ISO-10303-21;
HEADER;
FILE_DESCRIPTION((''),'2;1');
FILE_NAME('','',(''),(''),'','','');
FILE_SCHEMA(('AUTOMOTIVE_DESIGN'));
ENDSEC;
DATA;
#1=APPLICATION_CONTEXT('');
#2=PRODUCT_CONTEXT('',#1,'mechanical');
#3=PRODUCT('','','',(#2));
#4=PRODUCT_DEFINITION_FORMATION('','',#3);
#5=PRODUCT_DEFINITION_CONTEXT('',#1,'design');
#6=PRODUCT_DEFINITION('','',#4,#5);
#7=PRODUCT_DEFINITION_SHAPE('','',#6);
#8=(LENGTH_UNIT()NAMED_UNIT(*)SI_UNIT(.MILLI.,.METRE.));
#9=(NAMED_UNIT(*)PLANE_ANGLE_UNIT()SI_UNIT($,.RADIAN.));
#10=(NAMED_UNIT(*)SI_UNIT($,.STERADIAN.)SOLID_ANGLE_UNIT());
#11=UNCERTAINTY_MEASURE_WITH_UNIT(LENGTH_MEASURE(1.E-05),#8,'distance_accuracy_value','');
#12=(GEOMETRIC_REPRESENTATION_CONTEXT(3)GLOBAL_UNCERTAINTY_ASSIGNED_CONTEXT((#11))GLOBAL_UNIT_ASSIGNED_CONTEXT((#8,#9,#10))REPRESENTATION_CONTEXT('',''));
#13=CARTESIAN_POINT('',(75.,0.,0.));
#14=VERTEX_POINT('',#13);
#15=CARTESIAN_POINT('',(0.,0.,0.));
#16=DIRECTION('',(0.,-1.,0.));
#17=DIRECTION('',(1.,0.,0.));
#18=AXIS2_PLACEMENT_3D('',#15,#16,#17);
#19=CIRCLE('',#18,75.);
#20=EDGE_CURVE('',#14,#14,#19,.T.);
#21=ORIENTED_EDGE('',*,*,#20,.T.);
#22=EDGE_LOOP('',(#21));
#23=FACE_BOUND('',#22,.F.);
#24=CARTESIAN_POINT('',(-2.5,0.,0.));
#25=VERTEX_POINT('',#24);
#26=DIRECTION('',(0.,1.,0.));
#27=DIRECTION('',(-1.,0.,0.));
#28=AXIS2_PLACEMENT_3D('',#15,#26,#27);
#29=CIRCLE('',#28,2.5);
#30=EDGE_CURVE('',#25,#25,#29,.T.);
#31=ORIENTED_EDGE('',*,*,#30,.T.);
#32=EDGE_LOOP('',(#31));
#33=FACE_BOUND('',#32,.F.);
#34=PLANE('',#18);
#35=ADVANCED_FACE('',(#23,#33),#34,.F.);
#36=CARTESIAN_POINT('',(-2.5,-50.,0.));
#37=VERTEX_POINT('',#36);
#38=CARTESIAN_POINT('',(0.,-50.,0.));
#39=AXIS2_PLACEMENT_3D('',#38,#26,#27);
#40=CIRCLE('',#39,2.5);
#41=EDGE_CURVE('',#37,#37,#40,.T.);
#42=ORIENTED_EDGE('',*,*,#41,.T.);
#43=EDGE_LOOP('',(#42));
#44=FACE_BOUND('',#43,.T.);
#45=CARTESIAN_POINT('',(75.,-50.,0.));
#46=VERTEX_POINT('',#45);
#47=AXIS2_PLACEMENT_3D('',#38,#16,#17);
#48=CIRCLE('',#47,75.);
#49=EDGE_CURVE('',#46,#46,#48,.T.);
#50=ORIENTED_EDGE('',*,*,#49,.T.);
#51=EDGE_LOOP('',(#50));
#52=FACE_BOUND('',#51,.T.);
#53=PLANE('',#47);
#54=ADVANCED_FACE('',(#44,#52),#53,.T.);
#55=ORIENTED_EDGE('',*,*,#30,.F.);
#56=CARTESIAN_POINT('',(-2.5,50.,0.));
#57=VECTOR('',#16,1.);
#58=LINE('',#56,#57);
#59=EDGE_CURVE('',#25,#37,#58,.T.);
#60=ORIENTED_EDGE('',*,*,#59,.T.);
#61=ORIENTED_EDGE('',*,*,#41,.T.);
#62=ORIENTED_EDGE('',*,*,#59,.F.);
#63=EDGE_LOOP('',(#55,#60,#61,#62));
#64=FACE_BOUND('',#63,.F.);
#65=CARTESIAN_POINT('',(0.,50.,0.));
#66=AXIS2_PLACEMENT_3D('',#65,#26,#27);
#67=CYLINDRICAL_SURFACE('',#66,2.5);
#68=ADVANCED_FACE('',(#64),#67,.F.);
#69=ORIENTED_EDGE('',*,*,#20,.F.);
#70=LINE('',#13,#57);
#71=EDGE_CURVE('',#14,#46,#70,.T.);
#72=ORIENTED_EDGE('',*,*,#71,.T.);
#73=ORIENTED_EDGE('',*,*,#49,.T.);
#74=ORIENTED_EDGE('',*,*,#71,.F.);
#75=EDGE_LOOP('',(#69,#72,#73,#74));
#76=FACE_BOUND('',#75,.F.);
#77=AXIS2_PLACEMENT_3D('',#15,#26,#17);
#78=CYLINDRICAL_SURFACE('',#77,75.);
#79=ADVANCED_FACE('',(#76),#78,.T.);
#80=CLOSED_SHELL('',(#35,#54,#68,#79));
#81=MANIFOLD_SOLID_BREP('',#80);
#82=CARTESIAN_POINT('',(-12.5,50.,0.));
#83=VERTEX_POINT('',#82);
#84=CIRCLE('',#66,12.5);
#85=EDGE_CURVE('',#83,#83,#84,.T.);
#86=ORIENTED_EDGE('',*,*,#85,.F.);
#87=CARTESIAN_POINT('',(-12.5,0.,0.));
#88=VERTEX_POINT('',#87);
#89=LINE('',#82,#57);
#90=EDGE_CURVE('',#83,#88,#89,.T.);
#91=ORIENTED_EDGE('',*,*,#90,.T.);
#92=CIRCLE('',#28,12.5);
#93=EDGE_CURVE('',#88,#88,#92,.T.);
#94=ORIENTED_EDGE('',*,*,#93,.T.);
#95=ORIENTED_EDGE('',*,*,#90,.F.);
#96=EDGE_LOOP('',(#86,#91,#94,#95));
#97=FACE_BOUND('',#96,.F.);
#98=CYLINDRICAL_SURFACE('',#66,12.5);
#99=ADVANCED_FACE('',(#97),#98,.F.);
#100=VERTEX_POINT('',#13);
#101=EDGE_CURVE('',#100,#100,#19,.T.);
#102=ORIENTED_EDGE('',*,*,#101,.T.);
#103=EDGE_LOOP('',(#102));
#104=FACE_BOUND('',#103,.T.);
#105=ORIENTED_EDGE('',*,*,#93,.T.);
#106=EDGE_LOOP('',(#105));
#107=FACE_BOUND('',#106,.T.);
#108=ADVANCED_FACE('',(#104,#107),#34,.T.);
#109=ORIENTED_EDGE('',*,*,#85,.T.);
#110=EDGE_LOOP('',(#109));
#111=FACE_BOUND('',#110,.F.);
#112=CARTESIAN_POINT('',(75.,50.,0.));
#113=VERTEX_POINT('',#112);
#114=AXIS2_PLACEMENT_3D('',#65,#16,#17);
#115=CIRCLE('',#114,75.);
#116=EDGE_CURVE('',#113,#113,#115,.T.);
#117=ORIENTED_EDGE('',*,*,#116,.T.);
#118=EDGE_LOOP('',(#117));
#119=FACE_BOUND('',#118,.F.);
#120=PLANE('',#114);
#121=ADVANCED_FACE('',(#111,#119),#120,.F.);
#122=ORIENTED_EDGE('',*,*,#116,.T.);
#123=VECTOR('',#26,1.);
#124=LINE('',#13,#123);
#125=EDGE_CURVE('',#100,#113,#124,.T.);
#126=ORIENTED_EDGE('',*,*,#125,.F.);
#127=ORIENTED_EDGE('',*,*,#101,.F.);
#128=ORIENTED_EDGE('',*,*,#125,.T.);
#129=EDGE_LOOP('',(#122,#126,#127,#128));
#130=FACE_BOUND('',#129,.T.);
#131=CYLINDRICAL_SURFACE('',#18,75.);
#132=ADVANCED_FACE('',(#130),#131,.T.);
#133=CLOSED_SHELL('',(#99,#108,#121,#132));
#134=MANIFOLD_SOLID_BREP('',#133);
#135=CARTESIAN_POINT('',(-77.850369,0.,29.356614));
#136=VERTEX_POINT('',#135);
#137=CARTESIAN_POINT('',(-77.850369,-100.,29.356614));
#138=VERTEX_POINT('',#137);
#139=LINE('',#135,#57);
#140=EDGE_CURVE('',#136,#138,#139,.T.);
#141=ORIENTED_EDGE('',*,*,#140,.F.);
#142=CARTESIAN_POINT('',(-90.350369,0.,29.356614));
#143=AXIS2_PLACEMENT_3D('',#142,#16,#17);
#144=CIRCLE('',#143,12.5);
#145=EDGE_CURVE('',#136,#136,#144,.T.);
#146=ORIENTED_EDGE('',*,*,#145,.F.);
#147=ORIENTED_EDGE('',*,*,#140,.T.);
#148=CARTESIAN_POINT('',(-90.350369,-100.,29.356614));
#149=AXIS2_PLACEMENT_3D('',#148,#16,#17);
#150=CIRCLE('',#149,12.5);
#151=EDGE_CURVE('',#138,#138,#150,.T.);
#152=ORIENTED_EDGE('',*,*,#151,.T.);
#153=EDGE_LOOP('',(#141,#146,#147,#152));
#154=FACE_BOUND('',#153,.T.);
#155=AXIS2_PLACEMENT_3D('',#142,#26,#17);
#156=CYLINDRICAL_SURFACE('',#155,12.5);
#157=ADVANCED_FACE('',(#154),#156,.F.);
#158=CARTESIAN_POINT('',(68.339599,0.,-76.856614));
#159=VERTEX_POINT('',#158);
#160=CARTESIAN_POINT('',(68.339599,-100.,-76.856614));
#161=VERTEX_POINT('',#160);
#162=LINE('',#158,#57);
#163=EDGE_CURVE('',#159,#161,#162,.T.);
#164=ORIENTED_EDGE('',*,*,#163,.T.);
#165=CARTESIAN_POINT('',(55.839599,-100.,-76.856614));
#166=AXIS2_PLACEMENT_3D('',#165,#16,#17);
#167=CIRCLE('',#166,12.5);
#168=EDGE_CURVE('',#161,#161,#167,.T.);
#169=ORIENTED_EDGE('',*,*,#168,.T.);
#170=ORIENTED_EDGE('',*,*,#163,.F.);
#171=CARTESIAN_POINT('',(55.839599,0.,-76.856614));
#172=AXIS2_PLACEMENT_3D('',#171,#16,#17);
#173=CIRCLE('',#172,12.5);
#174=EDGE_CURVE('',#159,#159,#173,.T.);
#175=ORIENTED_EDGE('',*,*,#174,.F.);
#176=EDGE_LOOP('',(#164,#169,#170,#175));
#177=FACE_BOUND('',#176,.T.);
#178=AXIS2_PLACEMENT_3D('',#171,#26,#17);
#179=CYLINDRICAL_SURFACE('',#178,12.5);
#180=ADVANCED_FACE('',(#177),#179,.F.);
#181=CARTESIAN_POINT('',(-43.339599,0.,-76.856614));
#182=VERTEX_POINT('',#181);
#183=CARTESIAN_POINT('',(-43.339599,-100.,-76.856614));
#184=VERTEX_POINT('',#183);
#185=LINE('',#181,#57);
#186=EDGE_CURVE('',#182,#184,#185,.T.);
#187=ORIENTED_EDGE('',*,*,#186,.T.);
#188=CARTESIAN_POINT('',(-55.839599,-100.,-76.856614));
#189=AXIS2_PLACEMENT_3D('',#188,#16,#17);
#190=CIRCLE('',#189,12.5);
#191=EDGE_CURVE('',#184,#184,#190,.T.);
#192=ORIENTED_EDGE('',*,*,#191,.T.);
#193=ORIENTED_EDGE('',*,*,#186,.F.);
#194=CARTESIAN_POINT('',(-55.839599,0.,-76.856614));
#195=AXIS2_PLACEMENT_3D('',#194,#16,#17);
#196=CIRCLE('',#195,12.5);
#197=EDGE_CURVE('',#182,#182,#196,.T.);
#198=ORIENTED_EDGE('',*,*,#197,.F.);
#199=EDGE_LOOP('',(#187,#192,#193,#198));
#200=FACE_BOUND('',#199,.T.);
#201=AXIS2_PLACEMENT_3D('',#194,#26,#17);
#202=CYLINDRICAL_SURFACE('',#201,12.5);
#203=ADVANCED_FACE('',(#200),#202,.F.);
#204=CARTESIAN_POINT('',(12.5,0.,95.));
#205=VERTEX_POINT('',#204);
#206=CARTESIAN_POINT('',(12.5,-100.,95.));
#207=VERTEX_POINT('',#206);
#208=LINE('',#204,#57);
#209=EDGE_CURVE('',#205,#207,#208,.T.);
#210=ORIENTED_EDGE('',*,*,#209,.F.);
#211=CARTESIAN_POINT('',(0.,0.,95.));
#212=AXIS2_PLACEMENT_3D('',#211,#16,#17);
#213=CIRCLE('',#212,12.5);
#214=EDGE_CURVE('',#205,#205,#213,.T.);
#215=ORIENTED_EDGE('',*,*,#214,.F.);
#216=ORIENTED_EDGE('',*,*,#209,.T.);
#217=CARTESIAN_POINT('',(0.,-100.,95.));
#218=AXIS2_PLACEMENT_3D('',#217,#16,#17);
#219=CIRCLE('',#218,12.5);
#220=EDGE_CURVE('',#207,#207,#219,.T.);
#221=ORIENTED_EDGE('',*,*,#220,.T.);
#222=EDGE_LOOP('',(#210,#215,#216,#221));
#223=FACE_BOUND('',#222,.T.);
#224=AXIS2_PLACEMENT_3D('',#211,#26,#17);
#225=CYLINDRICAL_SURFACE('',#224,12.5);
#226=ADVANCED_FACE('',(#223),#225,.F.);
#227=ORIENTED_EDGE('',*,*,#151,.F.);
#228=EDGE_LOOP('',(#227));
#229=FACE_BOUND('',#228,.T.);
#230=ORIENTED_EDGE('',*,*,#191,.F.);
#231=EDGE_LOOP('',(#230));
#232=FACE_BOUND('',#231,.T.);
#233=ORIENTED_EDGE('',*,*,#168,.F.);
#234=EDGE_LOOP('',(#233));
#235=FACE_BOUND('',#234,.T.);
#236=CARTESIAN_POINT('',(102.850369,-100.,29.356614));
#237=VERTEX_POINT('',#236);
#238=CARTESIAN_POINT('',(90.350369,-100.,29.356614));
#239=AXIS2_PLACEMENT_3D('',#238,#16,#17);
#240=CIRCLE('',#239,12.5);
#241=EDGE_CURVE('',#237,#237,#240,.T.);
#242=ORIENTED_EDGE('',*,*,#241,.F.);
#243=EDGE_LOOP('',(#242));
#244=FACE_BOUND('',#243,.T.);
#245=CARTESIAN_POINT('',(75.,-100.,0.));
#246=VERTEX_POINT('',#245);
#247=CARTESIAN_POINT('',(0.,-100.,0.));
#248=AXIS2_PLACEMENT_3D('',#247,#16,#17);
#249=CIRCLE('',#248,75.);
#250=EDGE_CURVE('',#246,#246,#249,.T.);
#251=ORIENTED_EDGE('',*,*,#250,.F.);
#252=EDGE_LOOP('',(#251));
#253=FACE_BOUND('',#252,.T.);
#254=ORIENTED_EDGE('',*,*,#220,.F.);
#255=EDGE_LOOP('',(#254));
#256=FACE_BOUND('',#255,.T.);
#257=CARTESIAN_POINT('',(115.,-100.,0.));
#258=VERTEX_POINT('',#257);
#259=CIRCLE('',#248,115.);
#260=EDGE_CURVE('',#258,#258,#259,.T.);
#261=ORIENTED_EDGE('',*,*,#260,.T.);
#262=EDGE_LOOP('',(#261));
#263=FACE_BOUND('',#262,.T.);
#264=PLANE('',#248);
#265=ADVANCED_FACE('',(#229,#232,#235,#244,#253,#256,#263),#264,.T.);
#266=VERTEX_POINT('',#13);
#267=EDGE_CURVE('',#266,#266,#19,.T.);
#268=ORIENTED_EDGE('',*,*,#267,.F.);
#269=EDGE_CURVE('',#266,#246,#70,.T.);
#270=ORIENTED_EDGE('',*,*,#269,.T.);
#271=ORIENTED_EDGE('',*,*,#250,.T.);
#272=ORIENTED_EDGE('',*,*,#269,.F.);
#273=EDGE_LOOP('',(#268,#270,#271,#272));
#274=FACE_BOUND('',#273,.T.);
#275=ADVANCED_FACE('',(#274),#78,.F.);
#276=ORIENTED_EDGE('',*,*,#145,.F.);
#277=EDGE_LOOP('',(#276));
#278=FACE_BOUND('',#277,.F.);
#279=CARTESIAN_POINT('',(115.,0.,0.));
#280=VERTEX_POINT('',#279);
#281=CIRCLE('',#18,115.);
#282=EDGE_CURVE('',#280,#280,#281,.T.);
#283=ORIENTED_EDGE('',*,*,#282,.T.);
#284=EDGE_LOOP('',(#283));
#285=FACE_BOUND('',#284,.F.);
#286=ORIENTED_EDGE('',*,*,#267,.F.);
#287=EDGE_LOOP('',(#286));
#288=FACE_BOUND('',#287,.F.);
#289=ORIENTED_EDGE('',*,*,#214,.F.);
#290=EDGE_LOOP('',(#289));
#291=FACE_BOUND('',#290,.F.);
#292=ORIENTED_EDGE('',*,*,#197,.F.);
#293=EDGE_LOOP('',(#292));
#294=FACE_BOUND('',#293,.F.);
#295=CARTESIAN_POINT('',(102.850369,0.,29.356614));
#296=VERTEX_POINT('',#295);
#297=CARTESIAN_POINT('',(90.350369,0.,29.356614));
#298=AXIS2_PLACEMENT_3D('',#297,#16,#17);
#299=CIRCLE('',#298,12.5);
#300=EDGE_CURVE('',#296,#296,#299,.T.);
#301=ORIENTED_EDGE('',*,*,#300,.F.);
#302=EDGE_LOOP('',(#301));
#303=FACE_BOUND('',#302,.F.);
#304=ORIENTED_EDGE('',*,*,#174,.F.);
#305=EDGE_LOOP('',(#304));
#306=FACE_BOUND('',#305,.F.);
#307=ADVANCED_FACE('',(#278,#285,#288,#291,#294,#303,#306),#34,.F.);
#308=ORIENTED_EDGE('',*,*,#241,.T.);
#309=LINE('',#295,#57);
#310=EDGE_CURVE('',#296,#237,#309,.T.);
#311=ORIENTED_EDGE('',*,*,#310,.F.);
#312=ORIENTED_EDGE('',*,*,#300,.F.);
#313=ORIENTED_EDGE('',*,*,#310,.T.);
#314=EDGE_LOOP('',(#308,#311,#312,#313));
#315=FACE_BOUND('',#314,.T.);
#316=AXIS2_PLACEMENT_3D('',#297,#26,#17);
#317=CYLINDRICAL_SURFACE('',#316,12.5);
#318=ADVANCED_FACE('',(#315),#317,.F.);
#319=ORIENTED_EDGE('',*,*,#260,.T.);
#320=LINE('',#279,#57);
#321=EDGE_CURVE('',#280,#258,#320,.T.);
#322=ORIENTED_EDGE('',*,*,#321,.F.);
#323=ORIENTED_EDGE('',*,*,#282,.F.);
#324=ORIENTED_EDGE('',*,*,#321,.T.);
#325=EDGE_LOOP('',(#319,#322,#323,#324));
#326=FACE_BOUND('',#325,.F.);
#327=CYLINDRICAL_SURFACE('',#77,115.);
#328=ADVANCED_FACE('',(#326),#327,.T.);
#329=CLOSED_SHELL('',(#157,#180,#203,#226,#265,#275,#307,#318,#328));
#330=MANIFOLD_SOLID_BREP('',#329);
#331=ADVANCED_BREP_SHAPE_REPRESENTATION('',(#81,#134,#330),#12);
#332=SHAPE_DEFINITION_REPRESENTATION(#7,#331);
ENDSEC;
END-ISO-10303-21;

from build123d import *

# Parameters (mm, degrees)
F0_R     = 115
F0_R_2   = 12.5
F0_R_3   = 75
F1_DEPTH = 100
F2_DEPTH = 50
F3_DEPTH = 50
F4_R     = 12.5
F5_DEPTH = 25
F6_DEPTH = 99
F7_R     = 2.5
F8_DEPTH = 150.001


with BuildPart() as f1:
    # F0 (on Front) → F1 (new body)
    with BuildSketch(Plane.XZ):
        Circle(F0_R)
        with Locations((-55.8395989678, -76.8566144656)):
            Circle(F0_R_2, mode=Mode.SUBTRACT)
        with Locations((55.8395989678, -76.8566144656)):
            Circle(F0_R_2, mode=Mode.SUBTRACT)
        with Locations((-90.350369048, 29.3566144656)):
            Circle(F0_R_2, mode=Mode.SUBTRACT)
        Circle(F0_R_3, mode=Mode.SUBTRACT)
        with Locations((90.350369048, 29.3566144656)):
            Circle(F0_R_2, mode=Mode.SUBTRACT)
        with Locations((0, 95)):
            Circle(F0_R_2, mode=Mode.SUBTRACT)
    extrude(amount=F1_DEPTH)

    # F4 (on face) → F5 (cut)
    with BuildSketch(Plane(origin=(0, 50, 0), x_dir=(-1, 0, 0), z_dir=(0, 1, 0))):
        Circle(F4_R)
    extrude(amount=F5_DEPTH, mode=Mode.SUBTRACT)


with BuildPart() as f2:
    # F0 (on Front) → F2 (new body)
    with BuildSketch(Plane.XZ):
        Circle(F0_R_3)
    extrude(amount=-F2_DEPTH)

    # F4 (on face) → F6 (cut)
    with BuildSketch(Plane(origin=(0, 50, 0), x_dir=(-1, 0, 0), z_dir=(0, 1, 0))):
        Circle(F4_R)
    extrude(amount=-F6_DEPTH, mode=Mode.SUBTRACT)


with BuildPart() as f3:
    # F0 (on Front) → F3 (new body)
    with BuildSketch(Plane.XZ):
        Circle(F0_R_3)
    extrude(amount=F3_DEPTH)

    # F7 (on face) → F8 (cut, through all)
    with BuildSketch(Plane(origin=(0, 50, 0), x_dir=(-1, 0, 0), z_dir=(0, 1, 0))):
        Circle(F7_R)
    extrude(amount=-F8_DEPTH, mode=Mode.SUBTRACT)


solid = Compound([f1.part, f2.part, f3.part])
